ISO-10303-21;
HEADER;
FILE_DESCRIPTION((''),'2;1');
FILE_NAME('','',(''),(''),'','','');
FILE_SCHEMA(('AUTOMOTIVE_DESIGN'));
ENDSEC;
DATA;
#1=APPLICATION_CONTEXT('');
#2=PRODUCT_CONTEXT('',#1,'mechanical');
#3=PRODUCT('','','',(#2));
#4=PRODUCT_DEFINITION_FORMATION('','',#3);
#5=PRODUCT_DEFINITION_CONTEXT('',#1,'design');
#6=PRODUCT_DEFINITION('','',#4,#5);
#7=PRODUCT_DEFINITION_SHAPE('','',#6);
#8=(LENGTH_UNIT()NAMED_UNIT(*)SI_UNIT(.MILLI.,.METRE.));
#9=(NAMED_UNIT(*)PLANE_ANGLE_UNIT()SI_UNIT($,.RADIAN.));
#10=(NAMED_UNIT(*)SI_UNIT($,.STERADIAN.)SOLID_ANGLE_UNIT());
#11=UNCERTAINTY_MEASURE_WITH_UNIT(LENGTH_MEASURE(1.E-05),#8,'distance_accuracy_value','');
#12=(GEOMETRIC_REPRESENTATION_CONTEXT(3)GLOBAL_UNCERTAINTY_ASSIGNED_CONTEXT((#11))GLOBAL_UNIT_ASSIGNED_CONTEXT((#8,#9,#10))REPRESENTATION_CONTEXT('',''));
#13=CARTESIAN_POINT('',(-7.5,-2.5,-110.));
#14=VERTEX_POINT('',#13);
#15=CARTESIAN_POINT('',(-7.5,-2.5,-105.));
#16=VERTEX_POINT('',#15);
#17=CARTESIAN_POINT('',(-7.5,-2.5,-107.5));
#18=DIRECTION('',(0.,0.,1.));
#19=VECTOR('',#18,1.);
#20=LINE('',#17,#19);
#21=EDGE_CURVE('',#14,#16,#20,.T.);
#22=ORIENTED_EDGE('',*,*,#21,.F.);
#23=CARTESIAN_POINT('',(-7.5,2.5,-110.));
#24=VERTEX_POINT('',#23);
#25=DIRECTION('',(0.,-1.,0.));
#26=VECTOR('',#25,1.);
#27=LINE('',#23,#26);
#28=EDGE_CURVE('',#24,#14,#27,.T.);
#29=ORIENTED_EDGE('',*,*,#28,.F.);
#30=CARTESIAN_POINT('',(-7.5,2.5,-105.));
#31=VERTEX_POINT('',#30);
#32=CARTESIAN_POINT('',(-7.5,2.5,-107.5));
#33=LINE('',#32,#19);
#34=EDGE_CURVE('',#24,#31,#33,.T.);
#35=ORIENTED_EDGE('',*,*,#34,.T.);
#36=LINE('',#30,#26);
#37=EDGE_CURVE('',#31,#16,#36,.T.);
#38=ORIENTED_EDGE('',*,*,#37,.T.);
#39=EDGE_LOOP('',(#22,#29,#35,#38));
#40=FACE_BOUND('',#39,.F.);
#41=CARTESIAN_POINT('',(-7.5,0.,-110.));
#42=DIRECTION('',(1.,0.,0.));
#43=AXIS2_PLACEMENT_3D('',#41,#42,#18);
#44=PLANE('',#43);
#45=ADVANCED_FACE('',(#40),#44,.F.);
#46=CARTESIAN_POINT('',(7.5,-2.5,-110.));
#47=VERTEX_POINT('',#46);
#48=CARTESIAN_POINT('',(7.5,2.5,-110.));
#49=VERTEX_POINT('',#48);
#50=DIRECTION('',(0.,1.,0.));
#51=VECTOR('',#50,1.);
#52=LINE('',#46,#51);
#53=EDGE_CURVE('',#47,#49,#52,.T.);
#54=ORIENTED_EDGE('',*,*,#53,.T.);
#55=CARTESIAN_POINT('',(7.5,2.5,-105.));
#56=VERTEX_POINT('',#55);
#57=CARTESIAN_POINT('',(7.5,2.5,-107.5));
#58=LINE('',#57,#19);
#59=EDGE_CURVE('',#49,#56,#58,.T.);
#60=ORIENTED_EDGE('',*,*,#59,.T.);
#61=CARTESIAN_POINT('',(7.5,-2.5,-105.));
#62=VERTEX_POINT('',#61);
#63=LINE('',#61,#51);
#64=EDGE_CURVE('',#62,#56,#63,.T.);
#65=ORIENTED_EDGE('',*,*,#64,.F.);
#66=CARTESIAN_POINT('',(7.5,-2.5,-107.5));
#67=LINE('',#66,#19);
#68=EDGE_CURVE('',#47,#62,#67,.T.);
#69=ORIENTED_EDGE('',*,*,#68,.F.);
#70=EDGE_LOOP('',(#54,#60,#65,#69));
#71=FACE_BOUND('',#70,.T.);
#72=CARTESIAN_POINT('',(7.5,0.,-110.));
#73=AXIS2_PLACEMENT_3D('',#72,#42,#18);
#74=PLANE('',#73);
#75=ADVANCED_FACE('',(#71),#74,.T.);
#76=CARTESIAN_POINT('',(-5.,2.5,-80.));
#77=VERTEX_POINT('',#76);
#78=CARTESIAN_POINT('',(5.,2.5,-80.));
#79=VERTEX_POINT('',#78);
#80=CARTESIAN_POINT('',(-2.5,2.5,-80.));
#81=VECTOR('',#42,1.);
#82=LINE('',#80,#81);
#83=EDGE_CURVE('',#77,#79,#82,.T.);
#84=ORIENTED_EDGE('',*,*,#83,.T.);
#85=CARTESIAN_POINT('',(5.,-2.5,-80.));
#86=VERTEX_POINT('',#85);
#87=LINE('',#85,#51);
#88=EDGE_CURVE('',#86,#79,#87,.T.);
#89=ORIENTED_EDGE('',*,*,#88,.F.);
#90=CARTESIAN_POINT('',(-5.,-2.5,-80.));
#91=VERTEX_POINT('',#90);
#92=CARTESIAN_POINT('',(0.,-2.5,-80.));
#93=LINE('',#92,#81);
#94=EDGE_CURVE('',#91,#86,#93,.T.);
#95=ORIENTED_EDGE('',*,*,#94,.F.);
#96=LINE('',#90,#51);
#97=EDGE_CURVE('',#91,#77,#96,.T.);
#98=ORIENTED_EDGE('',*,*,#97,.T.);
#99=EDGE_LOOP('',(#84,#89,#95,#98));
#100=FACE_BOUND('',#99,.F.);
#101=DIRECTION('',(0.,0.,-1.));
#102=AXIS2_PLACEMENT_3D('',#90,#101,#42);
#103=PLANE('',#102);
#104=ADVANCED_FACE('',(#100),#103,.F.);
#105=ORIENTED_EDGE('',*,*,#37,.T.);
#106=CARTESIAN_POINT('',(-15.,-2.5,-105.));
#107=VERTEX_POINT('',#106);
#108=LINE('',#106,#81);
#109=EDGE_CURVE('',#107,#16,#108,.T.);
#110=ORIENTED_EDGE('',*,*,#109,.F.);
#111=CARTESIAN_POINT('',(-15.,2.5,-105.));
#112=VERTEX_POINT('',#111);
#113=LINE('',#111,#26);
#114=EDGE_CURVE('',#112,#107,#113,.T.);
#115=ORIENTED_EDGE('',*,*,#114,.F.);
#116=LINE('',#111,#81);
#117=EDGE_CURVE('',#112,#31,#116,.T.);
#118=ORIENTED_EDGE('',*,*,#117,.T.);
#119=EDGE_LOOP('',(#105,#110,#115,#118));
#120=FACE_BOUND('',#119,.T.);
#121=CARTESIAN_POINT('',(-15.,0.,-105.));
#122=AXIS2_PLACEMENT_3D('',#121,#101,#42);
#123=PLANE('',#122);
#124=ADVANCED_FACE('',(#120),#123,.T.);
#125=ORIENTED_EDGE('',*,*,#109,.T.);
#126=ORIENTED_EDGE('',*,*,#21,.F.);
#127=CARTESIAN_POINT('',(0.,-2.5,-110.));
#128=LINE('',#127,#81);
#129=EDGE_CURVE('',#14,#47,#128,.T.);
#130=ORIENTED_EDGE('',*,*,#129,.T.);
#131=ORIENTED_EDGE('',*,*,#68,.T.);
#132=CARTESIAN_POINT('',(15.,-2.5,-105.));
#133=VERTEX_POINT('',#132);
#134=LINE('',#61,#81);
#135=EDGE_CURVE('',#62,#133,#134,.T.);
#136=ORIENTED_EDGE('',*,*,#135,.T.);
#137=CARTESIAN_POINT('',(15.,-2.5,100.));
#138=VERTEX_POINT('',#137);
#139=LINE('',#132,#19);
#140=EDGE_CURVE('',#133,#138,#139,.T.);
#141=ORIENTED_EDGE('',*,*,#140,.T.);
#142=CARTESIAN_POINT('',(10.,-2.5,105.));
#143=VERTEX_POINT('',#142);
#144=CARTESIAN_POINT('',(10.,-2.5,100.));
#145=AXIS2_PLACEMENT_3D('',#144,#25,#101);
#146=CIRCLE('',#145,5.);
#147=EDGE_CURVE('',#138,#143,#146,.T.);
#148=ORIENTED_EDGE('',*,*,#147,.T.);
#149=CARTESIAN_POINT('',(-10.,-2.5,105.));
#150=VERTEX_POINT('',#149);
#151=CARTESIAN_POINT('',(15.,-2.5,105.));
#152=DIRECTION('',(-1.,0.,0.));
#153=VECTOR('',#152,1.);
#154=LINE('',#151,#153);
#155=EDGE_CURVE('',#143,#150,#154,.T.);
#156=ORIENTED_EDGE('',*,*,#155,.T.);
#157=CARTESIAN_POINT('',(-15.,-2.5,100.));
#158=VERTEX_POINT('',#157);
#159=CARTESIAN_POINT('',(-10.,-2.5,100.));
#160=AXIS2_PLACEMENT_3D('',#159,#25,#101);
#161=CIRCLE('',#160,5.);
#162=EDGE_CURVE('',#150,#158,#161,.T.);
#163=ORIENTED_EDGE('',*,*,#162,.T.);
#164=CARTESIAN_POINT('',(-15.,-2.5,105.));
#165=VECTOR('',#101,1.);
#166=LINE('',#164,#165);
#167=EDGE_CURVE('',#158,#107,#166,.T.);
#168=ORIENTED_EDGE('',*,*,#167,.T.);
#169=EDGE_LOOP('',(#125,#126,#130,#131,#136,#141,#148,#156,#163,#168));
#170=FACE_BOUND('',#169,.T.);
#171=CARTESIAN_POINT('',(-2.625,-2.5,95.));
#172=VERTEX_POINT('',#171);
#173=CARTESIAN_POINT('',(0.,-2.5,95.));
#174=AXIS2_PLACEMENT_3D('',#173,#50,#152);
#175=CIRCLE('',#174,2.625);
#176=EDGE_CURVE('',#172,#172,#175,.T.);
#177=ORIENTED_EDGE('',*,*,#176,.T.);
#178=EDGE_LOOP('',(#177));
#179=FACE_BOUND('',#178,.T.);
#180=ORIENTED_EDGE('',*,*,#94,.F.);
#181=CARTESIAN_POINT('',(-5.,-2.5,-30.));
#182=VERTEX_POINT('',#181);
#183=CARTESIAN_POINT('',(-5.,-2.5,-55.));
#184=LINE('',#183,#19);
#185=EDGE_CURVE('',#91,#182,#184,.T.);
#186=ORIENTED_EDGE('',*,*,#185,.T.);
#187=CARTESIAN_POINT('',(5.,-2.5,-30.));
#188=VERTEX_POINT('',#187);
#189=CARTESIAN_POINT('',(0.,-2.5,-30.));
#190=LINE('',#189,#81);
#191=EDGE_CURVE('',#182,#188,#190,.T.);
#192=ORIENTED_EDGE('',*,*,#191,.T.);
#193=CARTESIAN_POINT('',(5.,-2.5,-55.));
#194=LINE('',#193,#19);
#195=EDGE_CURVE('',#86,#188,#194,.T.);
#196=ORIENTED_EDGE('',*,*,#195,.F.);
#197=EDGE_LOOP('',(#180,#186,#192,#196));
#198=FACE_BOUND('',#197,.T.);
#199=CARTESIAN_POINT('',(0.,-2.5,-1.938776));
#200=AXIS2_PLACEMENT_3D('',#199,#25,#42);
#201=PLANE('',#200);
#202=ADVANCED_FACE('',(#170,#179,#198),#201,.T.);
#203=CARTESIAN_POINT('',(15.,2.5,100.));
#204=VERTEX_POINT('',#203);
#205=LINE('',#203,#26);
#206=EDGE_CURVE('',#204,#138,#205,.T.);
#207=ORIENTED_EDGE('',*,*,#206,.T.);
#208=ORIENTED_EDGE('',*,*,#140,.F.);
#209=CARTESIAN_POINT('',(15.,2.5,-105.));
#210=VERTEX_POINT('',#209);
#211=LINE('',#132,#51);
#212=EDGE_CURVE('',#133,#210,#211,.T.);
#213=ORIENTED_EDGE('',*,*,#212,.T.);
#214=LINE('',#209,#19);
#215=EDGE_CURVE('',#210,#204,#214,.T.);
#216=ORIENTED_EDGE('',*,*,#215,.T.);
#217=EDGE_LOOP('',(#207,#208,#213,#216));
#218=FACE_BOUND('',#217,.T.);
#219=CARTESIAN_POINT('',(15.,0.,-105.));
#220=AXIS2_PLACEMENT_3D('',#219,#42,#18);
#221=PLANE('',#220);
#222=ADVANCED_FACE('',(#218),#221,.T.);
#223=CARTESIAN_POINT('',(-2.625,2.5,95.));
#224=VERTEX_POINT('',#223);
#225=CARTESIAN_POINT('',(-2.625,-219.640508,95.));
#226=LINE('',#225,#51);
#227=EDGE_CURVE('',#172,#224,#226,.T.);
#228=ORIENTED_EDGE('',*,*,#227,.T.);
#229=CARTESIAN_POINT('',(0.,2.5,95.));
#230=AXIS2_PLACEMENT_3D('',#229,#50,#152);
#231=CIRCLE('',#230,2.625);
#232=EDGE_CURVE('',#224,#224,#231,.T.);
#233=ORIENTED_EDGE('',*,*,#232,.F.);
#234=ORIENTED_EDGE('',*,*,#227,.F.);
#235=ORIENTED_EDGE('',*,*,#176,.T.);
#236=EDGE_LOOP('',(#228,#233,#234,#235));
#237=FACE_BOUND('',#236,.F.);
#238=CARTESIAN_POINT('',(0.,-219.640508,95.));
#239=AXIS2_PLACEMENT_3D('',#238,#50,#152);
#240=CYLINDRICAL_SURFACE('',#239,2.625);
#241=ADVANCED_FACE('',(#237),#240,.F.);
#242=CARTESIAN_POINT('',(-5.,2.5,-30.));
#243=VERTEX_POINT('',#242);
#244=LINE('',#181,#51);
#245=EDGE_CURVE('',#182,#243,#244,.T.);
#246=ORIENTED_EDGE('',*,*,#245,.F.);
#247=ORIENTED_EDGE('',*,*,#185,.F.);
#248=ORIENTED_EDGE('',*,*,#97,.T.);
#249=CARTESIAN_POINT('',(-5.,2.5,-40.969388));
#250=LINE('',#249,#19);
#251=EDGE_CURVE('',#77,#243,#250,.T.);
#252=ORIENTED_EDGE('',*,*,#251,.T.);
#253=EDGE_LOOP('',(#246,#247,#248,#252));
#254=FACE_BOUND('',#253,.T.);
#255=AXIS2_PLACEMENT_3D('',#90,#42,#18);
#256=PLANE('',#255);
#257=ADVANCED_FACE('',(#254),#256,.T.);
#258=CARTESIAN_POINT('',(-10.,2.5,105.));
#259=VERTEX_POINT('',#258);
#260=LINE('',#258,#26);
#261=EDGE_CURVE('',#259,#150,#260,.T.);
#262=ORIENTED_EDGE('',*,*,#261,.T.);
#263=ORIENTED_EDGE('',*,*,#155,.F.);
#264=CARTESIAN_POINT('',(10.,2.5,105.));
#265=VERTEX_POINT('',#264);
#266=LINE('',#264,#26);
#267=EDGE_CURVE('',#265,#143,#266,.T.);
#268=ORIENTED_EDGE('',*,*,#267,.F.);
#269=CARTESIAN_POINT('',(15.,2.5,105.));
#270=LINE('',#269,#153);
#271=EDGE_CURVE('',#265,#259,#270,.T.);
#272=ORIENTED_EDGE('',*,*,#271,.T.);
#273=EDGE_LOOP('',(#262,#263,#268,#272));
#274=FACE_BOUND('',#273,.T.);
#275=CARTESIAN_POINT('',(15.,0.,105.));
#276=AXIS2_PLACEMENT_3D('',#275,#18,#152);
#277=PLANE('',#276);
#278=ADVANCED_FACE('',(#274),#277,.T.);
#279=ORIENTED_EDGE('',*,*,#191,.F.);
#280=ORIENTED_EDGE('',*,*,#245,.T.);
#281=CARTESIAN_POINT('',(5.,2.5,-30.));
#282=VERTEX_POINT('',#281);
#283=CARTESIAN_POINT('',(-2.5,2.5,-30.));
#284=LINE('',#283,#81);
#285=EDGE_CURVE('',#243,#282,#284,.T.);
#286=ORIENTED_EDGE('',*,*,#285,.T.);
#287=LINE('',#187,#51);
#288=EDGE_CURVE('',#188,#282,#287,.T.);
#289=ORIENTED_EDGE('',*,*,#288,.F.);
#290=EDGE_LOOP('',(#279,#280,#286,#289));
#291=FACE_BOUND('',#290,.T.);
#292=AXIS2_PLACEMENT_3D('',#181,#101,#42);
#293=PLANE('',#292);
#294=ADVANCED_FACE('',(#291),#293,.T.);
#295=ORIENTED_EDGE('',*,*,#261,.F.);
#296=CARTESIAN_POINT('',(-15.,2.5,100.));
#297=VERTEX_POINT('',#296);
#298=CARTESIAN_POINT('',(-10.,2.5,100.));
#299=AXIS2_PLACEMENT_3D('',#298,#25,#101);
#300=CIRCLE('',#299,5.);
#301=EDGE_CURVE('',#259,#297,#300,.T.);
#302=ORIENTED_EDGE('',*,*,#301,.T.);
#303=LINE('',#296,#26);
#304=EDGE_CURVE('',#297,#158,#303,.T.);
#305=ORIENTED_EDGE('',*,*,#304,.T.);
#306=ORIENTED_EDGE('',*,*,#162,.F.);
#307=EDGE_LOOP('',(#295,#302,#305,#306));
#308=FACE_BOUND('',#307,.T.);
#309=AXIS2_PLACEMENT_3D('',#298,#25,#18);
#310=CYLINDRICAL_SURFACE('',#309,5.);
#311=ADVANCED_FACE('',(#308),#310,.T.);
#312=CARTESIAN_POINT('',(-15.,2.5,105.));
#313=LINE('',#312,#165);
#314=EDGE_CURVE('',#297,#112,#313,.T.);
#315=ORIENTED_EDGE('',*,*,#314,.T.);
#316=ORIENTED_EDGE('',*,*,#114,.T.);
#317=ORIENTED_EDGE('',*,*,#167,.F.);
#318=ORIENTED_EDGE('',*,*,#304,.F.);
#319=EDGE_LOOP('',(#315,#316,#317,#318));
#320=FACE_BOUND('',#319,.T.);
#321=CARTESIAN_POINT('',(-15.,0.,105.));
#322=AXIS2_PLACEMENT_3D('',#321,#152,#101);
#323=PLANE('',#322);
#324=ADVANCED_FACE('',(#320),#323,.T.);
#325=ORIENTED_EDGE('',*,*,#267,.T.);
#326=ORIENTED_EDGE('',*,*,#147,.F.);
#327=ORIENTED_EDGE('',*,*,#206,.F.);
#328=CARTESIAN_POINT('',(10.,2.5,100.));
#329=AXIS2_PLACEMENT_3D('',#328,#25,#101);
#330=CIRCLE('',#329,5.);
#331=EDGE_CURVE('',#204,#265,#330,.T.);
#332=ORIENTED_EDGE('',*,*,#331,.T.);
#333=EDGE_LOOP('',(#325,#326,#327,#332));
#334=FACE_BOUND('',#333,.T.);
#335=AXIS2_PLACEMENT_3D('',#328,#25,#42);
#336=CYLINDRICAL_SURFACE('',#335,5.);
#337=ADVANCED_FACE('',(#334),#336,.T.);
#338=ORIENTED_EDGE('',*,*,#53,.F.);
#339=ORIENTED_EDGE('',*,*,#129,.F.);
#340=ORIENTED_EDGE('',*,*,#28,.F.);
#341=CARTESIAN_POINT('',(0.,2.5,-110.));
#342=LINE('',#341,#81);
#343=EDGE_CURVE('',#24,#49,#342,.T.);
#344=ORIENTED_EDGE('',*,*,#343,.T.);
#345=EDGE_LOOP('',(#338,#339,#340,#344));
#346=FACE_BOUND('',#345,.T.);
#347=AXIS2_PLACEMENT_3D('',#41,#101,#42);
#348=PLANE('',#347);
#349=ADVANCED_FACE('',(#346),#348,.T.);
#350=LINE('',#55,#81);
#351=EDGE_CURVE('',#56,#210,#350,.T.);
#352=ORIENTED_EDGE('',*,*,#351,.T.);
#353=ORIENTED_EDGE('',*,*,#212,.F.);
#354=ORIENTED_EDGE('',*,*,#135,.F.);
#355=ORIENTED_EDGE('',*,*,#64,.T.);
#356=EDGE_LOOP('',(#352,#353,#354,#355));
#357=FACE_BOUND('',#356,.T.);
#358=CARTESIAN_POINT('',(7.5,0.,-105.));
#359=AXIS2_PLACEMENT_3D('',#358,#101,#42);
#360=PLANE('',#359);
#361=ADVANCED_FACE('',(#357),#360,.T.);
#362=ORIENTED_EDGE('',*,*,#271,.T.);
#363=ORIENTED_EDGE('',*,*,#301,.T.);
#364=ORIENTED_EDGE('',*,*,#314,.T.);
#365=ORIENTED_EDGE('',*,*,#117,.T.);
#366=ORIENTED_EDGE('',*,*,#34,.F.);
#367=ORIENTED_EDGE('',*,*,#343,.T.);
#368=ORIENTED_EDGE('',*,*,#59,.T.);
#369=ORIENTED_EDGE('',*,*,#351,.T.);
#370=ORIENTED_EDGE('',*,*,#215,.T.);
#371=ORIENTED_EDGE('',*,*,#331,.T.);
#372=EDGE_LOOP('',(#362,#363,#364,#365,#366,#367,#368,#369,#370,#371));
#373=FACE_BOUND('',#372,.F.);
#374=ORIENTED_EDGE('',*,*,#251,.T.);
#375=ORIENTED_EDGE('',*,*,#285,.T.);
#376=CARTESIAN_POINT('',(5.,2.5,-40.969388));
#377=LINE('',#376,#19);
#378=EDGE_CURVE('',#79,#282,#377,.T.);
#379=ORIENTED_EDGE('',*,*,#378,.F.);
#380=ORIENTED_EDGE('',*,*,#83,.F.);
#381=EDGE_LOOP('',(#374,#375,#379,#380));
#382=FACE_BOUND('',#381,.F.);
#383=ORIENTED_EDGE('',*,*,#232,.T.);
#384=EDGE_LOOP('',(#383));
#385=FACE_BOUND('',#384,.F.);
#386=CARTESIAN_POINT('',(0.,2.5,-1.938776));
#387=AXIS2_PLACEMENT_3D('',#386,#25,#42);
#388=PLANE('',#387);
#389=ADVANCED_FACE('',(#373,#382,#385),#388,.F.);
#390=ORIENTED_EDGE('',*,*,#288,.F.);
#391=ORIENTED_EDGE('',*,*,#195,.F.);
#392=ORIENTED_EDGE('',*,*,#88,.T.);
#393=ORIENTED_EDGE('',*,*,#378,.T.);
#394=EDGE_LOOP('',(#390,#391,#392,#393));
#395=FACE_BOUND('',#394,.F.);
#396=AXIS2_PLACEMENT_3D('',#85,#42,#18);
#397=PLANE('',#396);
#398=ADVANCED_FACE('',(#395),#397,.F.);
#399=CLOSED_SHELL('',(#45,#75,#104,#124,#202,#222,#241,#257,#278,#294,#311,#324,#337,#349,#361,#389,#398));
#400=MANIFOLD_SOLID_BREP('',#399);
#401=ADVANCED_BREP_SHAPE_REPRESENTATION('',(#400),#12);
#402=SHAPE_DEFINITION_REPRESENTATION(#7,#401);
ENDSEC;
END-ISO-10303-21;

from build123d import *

# Parameters (mm, degrees)
F0_W     = 15
F0_H     = 5
F1_DEPTH = 2.5
F3_D     = 5.25
F4_R     = 5
F5_W     = 10
F5_H     = 50
F6_DEPTH = 10


with BuildPart() as f1:
    # F0 (on Front) → F1 (new body, symmetric)
    with BuildSketch(Plane.XZ):
        Polygon((15, -105), (15, 105), (-15, 105), (-15, -105), (-7.5, -105), (-7.5, -100), (7.5, -100), (7.5, -105), align=None)
        with Locations((0, -107.5)):
            Rectangle(F0_W, F0_H)
        with Locations((0, -102.5)):
            Rectangle(F0_W, F0_H)
    extrude(amount=F1_DEPTH, both=True)

    # F3 (through all)
    with Locations(Plane.XZ.offset(2.5)):
        with Locations((0, 95)):
            Hole(F3_D / 2)

    # F4
    f4_edges = [f1.edges().sort_by_distance(p)[0] for p in [
        (15, 0, 105),
        (-15, 0, 105),
    ]]
    fillet(f4_edges, radius=F4_R)

    # F5 (on face) → F6 (cut)
    with BuildSketch(Plane.XZ.offset(2.5)):
        with Locations((0, -55)):
            Rectangle(F5_W, F5_H)
    extrude(amount=-F6_DEPTH, mode=Mode.SUBTRACT)


solid = f1.part
